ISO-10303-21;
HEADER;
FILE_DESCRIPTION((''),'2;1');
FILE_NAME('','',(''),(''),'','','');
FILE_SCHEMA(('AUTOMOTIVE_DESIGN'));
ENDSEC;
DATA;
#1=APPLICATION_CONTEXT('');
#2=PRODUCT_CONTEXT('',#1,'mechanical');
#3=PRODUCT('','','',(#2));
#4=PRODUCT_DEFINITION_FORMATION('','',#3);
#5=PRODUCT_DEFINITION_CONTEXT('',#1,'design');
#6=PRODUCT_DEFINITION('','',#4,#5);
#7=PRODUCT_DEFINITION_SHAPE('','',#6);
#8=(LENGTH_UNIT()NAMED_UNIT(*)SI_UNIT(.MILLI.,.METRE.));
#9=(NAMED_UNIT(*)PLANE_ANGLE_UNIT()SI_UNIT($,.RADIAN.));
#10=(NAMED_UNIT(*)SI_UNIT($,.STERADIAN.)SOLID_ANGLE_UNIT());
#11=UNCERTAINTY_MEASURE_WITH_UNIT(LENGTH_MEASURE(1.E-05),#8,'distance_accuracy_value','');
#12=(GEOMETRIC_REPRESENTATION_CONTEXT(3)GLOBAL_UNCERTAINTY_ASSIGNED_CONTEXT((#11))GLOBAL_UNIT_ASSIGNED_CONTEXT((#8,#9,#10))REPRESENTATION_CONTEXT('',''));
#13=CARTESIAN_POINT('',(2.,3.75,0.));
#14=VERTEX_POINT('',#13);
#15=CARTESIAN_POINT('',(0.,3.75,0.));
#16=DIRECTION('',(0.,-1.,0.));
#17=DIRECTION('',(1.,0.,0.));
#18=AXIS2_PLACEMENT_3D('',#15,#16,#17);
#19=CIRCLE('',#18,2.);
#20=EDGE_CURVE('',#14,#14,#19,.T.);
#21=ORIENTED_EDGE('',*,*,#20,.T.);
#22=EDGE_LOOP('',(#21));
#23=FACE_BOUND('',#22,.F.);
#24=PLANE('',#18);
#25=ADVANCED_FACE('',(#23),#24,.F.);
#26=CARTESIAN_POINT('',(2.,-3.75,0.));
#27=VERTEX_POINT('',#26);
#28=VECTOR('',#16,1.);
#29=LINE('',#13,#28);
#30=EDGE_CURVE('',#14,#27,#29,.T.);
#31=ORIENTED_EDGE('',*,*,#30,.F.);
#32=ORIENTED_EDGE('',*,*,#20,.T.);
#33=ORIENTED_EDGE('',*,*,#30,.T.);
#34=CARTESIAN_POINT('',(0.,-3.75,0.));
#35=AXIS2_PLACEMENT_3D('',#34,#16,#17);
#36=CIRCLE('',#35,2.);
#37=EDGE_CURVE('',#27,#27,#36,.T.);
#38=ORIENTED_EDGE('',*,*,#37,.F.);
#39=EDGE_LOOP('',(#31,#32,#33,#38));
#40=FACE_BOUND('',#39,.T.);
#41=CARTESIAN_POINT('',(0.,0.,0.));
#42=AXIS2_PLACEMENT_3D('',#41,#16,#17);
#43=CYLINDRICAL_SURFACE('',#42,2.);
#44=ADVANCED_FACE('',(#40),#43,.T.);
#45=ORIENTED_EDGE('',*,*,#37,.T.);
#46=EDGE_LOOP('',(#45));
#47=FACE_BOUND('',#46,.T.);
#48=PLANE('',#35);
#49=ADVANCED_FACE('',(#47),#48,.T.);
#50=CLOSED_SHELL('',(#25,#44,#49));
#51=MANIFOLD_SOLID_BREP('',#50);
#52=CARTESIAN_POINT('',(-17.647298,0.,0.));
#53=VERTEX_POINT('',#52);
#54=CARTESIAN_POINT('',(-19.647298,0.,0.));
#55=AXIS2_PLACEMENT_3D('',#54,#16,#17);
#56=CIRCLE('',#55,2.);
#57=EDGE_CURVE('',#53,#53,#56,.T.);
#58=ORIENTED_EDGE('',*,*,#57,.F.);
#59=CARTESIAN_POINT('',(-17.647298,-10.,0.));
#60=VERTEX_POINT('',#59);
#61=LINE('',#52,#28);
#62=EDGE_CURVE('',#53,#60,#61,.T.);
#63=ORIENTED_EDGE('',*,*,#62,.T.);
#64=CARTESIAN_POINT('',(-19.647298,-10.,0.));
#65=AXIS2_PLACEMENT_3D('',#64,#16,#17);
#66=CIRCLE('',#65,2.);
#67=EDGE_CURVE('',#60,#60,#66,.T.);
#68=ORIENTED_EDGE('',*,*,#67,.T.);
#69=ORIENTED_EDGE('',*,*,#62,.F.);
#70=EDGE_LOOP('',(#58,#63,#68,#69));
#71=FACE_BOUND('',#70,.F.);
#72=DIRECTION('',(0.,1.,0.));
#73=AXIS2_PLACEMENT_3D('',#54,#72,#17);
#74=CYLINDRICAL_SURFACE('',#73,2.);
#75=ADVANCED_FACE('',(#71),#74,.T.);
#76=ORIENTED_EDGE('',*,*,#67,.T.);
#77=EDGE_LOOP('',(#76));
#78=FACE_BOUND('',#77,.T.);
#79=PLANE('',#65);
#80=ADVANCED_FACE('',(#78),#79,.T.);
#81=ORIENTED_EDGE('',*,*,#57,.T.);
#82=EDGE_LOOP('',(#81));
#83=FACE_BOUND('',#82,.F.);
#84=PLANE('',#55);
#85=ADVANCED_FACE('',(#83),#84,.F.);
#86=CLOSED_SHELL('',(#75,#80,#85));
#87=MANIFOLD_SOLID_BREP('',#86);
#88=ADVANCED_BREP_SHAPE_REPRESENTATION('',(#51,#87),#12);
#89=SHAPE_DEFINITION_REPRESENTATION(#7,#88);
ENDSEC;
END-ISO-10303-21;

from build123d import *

# Parameters (mm, degrees)
F2_R     = 2
F3_DEPTH = 3.75
F4_R     = 2
F5_DEPTH = 10


with BuildPart() as f3:
    # F2 (on Front) → F3 (new body, symmetric)
    with BuildSketch(Plane.XZ):
        Circle(F2_R)
    extrude(amount=F3_DEPTH, both=True)


with BuildPart() as f5:
    # F4 (on Front) → F5 (new body)
    with BuildSketch(Plane.XZ):
        with Locations((-19.6472983807, 0)):
            Circle(F4_R)
    extrude(amount=F5_DEPTH)


solid = Compound([f3.part, f5.part])
